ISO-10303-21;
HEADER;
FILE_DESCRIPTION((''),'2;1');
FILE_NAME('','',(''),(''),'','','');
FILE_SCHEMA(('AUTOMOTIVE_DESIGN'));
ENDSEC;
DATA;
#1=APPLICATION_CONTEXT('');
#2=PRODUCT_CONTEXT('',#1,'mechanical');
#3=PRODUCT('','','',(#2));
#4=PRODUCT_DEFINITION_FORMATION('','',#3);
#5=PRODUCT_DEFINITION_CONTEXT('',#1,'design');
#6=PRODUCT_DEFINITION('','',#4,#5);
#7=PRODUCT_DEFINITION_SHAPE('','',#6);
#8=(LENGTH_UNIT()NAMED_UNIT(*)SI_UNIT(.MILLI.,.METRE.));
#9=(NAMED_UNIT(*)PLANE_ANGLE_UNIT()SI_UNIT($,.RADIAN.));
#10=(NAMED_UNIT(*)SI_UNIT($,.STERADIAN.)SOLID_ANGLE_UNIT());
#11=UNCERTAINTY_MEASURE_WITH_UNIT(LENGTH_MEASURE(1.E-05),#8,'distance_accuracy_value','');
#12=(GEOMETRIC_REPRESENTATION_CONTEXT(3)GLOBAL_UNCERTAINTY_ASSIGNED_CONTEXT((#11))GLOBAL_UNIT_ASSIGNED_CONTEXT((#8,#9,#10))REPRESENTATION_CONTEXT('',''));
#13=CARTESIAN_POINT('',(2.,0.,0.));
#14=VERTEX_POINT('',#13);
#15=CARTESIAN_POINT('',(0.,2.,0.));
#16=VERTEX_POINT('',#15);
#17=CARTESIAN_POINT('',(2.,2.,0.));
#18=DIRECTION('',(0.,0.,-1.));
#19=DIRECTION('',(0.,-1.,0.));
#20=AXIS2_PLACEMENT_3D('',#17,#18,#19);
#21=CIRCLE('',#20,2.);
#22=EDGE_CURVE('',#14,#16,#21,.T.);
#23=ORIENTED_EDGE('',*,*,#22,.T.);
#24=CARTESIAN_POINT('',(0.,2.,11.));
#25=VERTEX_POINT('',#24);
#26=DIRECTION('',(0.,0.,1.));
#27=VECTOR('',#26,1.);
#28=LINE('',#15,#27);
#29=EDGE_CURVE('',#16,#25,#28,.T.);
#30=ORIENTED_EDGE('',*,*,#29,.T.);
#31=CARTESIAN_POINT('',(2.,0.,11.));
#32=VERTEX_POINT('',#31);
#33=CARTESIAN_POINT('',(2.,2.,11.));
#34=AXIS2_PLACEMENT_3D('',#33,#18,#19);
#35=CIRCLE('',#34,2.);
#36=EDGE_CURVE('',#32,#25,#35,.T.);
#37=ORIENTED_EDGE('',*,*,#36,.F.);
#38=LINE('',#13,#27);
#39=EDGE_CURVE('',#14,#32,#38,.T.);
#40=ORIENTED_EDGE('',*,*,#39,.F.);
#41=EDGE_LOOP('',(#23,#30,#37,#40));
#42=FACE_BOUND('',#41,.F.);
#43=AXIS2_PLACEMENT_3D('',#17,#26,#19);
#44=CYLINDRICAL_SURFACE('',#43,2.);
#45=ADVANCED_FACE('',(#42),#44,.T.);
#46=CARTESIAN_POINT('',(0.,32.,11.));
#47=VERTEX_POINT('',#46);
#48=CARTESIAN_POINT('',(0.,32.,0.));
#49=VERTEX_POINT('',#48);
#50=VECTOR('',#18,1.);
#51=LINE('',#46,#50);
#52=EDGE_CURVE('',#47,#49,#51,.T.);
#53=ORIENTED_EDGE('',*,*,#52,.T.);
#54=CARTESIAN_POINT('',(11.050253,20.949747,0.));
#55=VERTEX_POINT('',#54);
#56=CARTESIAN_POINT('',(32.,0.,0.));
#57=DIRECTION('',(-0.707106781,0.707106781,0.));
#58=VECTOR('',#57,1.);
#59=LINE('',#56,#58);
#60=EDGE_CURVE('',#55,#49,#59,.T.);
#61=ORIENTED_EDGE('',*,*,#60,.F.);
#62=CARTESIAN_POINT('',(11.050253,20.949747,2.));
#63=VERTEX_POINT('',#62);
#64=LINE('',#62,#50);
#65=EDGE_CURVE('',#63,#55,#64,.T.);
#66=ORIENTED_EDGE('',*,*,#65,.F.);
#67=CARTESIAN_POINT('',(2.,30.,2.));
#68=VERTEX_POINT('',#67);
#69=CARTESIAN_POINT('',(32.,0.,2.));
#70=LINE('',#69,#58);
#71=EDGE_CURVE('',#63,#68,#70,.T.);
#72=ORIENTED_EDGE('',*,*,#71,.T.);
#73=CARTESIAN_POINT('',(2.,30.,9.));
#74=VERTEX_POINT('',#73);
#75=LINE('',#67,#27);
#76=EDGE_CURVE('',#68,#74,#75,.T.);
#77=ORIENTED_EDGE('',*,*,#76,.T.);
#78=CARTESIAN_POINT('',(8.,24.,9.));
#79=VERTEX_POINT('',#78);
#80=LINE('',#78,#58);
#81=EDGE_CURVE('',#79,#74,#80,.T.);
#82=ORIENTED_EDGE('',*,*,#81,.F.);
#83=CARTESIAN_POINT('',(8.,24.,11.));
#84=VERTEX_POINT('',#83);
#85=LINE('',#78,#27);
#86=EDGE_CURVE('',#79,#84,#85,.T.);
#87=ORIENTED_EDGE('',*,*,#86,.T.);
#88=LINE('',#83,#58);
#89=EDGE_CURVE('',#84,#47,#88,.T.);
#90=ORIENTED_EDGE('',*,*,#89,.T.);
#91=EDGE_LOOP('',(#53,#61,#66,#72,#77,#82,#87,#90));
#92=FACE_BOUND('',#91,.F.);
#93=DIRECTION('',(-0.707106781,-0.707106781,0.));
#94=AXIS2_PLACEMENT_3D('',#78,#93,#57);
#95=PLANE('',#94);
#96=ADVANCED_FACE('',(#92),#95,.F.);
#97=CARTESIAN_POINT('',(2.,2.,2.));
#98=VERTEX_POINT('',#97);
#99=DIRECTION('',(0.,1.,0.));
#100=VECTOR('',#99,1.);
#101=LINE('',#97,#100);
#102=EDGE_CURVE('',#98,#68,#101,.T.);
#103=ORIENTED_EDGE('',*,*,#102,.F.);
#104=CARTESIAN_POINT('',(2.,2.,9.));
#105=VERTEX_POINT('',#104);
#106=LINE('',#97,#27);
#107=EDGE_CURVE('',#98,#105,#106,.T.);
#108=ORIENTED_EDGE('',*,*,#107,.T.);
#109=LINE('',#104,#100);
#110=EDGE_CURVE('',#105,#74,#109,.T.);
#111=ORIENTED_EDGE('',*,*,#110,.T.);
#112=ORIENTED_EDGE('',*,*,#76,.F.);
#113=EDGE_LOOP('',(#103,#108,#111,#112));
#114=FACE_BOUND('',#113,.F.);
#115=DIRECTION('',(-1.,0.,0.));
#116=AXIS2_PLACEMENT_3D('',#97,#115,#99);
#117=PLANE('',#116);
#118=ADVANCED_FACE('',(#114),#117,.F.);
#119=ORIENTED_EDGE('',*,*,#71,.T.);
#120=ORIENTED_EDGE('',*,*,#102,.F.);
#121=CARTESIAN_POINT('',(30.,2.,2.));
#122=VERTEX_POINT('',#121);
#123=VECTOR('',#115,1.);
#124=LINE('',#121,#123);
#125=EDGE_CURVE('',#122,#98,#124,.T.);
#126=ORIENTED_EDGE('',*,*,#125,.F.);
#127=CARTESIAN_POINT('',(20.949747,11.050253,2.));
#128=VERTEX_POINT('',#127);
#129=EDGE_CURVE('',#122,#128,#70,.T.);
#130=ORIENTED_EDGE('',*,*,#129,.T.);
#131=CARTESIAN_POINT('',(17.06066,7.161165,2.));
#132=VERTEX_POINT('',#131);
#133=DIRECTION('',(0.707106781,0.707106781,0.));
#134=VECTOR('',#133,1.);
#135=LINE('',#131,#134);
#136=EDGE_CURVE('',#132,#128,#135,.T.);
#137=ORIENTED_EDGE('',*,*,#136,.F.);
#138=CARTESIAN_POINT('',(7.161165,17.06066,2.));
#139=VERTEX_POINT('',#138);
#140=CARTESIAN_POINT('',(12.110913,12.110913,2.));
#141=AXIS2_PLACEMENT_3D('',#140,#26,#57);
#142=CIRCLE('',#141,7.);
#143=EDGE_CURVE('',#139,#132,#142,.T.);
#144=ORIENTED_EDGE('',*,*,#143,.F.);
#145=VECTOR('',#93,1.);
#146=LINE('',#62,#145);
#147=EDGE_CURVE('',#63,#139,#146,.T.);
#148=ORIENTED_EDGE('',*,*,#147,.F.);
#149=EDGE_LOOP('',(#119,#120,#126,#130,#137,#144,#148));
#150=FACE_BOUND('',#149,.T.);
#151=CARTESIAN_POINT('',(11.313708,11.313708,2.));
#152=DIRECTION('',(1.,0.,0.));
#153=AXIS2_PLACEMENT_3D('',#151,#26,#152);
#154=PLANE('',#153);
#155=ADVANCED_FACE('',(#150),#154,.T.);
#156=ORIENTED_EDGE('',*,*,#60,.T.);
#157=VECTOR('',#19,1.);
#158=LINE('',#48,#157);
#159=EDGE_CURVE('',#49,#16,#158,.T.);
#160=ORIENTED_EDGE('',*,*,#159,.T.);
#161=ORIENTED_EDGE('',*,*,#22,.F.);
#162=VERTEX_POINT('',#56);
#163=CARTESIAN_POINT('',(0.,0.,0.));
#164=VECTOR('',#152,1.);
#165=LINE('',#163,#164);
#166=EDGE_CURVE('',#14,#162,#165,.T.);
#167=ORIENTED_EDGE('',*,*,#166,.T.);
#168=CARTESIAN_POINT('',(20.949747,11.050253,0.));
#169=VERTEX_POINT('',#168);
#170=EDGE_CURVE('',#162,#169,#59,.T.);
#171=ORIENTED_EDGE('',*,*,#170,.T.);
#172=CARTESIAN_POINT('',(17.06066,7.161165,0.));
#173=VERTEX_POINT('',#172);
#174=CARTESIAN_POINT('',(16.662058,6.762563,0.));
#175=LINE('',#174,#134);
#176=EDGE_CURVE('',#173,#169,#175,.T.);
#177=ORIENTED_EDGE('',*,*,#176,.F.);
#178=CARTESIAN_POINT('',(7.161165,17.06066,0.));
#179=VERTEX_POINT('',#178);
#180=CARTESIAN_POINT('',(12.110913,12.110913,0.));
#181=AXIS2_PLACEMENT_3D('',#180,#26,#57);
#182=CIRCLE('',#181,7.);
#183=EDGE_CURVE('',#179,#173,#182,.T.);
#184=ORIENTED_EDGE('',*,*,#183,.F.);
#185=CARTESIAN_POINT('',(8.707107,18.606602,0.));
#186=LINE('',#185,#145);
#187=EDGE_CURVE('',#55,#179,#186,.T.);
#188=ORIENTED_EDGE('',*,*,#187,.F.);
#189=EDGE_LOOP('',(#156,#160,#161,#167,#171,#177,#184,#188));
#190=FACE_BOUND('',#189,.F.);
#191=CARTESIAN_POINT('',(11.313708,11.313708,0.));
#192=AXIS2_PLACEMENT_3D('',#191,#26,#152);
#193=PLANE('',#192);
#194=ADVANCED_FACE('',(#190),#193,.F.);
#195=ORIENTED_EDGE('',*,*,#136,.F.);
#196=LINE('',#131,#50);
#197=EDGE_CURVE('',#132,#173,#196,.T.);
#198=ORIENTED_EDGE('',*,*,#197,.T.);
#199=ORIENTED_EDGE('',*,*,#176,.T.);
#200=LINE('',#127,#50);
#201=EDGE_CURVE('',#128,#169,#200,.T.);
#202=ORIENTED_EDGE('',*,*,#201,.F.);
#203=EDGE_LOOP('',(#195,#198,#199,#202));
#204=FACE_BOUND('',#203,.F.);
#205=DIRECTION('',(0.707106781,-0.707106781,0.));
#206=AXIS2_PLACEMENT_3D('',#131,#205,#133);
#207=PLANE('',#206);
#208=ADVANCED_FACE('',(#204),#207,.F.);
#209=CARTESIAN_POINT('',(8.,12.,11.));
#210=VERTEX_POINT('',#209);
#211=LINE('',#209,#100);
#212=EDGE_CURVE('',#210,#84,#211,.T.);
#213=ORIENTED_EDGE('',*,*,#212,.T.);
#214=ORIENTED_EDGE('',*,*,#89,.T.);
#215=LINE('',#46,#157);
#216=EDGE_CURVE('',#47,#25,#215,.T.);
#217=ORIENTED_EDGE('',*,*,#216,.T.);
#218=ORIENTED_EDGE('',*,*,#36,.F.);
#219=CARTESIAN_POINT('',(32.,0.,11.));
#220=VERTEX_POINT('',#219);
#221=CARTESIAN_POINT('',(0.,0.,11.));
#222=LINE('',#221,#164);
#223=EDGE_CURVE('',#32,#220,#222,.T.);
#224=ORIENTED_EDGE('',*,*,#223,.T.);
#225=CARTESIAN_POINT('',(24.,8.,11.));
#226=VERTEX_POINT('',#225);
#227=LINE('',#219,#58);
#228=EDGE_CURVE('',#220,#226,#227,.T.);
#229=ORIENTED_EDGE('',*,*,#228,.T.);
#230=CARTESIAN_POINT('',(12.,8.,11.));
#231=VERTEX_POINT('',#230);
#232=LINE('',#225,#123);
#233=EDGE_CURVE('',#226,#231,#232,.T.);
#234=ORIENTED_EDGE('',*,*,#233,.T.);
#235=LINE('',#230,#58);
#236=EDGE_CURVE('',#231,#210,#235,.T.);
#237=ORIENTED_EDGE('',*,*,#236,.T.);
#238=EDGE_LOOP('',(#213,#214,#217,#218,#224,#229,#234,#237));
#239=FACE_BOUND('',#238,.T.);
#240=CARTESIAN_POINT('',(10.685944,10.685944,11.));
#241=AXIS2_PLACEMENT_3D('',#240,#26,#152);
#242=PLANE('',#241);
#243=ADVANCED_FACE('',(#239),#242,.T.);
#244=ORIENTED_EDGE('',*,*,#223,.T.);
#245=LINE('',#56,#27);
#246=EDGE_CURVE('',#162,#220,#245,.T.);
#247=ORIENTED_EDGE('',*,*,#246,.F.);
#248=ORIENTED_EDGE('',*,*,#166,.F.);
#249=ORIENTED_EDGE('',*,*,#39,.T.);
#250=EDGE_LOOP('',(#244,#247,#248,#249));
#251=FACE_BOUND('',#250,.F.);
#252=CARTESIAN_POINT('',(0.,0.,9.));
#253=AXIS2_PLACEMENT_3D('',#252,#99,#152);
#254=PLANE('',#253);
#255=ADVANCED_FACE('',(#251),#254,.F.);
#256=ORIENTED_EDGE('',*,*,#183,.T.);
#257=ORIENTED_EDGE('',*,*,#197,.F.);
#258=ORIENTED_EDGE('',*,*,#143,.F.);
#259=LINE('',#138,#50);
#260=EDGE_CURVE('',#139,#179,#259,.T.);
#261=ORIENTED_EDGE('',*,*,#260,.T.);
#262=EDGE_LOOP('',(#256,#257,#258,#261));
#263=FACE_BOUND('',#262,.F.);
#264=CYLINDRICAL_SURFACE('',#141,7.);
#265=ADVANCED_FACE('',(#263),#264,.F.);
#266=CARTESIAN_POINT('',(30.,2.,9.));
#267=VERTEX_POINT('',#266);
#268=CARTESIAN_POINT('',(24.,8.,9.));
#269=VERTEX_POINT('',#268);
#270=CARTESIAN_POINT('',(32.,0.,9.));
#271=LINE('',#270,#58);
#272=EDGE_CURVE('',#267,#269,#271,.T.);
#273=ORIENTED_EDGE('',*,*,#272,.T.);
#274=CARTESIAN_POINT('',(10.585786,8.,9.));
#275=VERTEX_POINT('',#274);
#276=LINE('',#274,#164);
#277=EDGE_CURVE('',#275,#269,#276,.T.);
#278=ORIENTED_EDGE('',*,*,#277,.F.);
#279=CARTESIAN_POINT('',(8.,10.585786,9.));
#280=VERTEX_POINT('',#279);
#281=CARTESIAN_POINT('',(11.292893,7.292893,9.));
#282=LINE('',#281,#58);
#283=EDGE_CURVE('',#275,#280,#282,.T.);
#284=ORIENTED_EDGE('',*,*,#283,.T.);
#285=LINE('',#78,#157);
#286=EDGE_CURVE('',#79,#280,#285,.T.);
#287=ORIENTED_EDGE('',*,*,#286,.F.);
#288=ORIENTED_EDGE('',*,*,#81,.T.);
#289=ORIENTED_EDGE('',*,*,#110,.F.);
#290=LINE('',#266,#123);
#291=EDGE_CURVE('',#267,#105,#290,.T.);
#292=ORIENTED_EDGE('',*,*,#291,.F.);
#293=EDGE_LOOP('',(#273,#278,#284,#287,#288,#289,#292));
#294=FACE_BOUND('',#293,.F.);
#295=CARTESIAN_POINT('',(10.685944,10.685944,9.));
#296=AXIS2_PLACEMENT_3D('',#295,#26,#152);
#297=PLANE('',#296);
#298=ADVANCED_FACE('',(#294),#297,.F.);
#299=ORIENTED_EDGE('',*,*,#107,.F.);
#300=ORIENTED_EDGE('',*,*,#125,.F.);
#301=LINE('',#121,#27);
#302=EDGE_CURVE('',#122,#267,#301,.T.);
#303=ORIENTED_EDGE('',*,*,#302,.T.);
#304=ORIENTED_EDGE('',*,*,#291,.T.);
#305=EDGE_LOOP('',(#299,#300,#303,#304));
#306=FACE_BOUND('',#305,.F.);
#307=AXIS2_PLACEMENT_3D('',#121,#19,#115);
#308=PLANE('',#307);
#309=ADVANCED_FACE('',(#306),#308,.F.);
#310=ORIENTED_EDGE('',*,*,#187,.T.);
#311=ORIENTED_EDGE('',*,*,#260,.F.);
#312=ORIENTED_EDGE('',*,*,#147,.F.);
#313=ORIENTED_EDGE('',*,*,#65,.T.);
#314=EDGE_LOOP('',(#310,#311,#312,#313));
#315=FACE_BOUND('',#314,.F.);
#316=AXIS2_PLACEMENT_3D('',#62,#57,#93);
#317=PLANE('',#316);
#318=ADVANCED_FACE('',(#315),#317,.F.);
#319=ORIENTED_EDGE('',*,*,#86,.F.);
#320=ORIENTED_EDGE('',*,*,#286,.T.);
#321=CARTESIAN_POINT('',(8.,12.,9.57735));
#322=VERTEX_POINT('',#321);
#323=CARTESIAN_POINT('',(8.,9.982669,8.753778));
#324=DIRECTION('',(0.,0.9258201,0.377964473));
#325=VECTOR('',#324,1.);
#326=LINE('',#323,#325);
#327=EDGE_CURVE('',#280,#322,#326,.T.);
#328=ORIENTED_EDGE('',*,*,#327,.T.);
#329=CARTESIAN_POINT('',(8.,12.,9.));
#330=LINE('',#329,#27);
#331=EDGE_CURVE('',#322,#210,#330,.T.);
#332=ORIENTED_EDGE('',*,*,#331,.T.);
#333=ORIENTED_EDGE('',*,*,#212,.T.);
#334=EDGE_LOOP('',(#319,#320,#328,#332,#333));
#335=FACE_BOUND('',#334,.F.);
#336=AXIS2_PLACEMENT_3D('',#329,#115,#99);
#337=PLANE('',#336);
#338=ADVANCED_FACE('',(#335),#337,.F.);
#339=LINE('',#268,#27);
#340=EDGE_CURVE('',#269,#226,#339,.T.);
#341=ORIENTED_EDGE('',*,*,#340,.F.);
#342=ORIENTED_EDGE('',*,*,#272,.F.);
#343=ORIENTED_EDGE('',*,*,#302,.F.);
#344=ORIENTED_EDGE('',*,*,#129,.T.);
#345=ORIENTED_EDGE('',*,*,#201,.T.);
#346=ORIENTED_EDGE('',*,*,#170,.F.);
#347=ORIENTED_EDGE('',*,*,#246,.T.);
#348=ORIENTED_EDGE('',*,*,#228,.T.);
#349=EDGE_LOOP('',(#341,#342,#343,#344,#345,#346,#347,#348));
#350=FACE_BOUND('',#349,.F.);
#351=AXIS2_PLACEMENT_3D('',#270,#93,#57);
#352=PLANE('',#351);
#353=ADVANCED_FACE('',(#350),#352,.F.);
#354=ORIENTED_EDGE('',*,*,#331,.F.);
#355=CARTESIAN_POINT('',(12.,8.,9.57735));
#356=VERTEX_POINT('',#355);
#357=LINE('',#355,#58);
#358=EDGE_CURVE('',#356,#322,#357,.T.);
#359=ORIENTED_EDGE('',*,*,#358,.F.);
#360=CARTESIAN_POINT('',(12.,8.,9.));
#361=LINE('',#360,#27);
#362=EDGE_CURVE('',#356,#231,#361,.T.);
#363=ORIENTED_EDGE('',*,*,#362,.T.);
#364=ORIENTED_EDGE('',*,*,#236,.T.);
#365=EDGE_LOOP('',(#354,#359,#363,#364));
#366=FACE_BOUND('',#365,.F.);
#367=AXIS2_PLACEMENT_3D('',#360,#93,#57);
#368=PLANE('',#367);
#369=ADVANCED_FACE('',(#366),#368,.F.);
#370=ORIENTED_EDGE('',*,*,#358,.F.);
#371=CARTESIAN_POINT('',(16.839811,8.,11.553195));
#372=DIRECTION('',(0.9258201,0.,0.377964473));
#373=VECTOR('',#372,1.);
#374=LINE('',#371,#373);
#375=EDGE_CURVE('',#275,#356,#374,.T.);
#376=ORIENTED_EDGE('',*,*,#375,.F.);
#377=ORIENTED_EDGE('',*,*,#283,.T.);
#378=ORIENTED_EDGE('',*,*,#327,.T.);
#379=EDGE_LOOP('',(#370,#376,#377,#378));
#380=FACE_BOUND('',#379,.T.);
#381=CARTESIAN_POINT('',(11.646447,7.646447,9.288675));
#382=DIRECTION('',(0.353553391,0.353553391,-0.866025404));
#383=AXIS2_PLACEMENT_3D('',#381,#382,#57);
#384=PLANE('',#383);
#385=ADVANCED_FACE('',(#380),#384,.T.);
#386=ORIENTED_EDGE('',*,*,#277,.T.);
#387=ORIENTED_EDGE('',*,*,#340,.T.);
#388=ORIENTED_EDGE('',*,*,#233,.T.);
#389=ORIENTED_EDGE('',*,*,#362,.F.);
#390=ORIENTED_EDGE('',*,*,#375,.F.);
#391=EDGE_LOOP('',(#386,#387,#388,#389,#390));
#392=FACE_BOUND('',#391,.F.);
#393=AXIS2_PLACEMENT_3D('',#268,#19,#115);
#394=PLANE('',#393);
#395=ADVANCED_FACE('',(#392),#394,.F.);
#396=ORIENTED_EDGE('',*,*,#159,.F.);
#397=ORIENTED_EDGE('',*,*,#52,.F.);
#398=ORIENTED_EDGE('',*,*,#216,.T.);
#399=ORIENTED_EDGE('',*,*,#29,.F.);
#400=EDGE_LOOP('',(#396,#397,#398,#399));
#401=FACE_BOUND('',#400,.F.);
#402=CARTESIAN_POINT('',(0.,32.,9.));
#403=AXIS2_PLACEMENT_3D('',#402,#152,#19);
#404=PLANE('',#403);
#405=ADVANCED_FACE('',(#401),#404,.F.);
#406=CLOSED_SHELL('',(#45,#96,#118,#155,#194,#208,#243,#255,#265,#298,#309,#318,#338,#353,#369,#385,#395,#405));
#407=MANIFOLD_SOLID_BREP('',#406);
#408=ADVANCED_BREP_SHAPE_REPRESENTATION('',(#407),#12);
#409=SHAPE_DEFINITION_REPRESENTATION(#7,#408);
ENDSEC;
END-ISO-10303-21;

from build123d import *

# Parameters (mm, degrees)
F1_DEPTH = 2
F3_DEPTH = 25
F5_DEPTH = 7
F7_DEPTH = 2
F8_SIZE2 = 0.5773502692
F8_SIZE  = 1
F9_R     = 2


with BuildPart() as f1:
    # F0 (on Top) → F1 (new body)
    with BuildSketch(Plane.XY):
        Polygon((0, 32), (0, 0), (32, 0), align=None)
    extrude(amount=F1_DEPTH)

    # F2 (on face) → F3 (cut)
    with BuildSketch(Plane.XY.offset(2)):
        with BuildLine():
            Line((11.0502525317, 20.9497474683), (7.1611652352, 17.0606601718))
            ThreePointArc((7.1611652352, 17.0606601718), (7.1611652352, 7.1611652352), (17.0606601718, 7.1611652352))
            Line((17.0606601718, 7.1611652352), (20.9497474683, 11.0502525317))
            Line((20.9497474683, 11.0502525317), (11.0502525317, 20.9497474683))
        make_face()
    extrude(amount=-F3_DEPTH, mode=Mode.SUBTRACT)

    # F4 (on face) → F5 (join)
    with BuildSketch(Plane.XY.offset(2)):
        Polygon((0, 32), (0, 0), (32, 0), (30, 2), (2, 2), (2, 30), align=None)
    extrude(amount=F5_DEPTH)

    # F6 (on face) → F7 (join)
    with BuildSketch(Plane.XY.offset(9)):
        Polygon((0, 32), (0, 0), (32, 0), (30, 2), (24, 8), (12, 8), (8, 12), (8, 24), (2, 30), align=None)
    extrude(amount=F7_DEPTH)

    # F8
    f8_edges = [f1.edges().sort_by_distance(p)[0] for p in [
        (10, 10, 9),
    ]]
    chamfer(f8_edges, length=F8_SIZE, length2=F8_SIZE2)

    # F9
    f9_edges = [f1.edges().sort_by_distance(p)[0] for p in [
        (0, 0, 5.5),
    ]]
    fillet(f9_edges, radius=F9_R)


solid = f1.part
